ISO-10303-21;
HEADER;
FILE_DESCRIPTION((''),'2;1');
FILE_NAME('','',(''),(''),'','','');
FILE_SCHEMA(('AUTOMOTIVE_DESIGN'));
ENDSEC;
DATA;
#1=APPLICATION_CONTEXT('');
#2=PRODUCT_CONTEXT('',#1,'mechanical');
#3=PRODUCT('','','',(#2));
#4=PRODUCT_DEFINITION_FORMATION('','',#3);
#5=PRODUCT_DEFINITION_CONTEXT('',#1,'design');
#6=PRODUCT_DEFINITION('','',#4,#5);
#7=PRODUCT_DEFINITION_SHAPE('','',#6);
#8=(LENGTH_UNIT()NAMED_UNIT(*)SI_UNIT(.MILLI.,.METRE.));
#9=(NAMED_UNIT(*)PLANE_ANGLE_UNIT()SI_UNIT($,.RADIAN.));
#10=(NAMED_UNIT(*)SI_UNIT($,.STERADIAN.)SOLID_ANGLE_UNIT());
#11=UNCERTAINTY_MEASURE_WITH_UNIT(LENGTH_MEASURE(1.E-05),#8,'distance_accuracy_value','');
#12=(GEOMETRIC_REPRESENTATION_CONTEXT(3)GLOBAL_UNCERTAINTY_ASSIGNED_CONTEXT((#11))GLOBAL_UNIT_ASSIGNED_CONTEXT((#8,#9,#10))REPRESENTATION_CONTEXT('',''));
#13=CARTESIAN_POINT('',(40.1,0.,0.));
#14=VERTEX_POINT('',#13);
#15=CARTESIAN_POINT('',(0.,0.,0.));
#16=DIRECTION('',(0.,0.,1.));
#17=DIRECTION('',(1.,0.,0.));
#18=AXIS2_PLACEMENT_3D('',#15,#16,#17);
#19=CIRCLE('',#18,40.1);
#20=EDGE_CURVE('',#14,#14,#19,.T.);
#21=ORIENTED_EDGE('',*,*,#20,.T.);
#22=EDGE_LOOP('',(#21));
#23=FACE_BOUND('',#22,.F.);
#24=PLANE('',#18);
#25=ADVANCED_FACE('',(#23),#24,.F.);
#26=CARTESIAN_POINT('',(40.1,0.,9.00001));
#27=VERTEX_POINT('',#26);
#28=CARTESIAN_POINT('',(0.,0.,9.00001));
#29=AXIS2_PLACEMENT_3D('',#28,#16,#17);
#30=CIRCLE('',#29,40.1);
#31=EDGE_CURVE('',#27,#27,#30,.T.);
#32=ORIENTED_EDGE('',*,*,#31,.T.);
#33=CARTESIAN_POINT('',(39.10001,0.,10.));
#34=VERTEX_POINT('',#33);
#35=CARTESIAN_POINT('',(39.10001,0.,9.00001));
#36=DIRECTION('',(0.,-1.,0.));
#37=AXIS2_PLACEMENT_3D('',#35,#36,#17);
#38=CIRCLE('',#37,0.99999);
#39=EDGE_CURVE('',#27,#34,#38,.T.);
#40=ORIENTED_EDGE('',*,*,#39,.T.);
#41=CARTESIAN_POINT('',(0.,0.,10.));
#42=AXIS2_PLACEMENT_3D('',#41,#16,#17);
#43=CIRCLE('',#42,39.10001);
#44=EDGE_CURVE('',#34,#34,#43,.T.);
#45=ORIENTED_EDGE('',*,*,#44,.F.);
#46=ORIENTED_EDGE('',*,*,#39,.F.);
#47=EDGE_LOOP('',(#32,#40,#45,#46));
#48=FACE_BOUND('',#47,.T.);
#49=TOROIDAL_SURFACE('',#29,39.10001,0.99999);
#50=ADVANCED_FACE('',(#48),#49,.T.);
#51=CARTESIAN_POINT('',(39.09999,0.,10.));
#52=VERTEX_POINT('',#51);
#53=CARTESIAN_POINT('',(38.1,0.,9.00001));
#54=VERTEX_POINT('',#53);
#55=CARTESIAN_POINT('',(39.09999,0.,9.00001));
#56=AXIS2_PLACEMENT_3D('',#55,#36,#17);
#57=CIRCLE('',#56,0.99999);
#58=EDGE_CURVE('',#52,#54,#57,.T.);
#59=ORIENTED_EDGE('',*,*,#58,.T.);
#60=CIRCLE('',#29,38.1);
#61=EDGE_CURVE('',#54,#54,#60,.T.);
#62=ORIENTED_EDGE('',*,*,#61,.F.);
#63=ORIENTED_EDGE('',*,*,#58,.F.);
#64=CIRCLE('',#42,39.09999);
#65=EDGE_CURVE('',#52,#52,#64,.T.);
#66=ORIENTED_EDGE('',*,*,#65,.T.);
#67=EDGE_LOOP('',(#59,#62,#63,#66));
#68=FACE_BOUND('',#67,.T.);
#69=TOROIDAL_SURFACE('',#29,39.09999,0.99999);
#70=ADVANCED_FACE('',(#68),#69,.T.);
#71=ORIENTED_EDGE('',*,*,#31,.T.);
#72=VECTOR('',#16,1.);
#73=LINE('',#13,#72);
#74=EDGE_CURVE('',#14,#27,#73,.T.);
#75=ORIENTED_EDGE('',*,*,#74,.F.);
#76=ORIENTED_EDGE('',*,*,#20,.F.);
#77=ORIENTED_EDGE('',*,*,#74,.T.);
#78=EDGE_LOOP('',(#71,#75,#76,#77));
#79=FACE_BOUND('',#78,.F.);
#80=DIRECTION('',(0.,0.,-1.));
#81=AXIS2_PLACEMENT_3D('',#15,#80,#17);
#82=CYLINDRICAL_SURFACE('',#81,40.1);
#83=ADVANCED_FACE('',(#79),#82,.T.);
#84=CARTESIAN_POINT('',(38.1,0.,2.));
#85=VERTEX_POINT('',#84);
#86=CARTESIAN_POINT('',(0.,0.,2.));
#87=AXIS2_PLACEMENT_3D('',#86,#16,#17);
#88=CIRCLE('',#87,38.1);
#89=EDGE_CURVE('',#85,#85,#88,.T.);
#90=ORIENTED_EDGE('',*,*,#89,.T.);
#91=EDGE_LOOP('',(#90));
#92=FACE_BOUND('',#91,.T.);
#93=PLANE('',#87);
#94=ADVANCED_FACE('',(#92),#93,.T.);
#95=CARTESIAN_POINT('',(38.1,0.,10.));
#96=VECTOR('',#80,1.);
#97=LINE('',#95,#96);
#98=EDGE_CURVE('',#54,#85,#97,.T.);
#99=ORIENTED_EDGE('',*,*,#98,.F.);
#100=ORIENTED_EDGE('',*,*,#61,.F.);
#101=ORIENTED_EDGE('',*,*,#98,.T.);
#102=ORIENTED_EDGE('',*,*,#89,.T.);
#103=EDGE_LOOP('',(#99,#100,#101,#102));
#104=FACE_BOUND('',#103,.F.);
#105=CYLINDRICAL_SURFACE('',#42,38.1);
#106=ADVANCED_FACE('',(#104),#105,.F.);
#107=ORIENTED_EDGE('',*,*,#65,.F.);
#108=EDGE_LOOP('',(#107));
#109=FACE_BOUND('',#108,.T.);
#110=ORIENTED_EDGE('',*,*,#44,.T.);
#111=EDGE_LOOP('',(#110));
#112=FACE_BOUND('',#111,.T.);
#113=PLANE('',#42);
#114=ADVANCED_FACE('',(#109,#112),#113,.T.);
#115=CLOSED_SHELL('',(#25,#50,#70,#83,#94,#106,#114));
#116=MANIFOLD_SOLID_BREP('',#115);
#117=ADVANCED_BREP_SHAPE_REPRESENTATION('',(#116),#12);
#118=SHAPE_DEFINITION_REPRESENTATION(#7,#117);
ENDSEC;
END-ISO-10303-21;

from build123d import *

# Parameters (mm, degrees)
F0_R     = 40.1
F1_DEPTH = 10
F2_R     = 38.1
F3_DEPTH = 8
F4_R     = 0.99999


# Not quite as in the source:
# - a fillet or chamfer is up to 0.001 mm smaller than in the source, because OpenCascade refuses the exact size


with BuildPart() as f1:
    # F0 (on Top) → F1 (new body)
    with BuildSketch(Plane.XY):
        Circle(F0_R)
    extrude(amount=F1_DEPTH)

    # F2 (on face) → F3 (cut)
    with BuildSketch(Plane.XY.offset(10)):
        Circle(F2_R)
    extrude(amount=-F3_DEPTH, mode=Mode.SUBTRACT)

    # F4 (radius 1 in the source; OpenCascade refuses exactly that, so slightly less here)
    f4_edges = [f1.edges().sort_by_distance(p)[0] for p in [
        (-38.1, 0, 10),
        (-40.1, 0, 10),
    ]]
    fillet(f4_edges, radius=F4_R)


solid = f1.part
